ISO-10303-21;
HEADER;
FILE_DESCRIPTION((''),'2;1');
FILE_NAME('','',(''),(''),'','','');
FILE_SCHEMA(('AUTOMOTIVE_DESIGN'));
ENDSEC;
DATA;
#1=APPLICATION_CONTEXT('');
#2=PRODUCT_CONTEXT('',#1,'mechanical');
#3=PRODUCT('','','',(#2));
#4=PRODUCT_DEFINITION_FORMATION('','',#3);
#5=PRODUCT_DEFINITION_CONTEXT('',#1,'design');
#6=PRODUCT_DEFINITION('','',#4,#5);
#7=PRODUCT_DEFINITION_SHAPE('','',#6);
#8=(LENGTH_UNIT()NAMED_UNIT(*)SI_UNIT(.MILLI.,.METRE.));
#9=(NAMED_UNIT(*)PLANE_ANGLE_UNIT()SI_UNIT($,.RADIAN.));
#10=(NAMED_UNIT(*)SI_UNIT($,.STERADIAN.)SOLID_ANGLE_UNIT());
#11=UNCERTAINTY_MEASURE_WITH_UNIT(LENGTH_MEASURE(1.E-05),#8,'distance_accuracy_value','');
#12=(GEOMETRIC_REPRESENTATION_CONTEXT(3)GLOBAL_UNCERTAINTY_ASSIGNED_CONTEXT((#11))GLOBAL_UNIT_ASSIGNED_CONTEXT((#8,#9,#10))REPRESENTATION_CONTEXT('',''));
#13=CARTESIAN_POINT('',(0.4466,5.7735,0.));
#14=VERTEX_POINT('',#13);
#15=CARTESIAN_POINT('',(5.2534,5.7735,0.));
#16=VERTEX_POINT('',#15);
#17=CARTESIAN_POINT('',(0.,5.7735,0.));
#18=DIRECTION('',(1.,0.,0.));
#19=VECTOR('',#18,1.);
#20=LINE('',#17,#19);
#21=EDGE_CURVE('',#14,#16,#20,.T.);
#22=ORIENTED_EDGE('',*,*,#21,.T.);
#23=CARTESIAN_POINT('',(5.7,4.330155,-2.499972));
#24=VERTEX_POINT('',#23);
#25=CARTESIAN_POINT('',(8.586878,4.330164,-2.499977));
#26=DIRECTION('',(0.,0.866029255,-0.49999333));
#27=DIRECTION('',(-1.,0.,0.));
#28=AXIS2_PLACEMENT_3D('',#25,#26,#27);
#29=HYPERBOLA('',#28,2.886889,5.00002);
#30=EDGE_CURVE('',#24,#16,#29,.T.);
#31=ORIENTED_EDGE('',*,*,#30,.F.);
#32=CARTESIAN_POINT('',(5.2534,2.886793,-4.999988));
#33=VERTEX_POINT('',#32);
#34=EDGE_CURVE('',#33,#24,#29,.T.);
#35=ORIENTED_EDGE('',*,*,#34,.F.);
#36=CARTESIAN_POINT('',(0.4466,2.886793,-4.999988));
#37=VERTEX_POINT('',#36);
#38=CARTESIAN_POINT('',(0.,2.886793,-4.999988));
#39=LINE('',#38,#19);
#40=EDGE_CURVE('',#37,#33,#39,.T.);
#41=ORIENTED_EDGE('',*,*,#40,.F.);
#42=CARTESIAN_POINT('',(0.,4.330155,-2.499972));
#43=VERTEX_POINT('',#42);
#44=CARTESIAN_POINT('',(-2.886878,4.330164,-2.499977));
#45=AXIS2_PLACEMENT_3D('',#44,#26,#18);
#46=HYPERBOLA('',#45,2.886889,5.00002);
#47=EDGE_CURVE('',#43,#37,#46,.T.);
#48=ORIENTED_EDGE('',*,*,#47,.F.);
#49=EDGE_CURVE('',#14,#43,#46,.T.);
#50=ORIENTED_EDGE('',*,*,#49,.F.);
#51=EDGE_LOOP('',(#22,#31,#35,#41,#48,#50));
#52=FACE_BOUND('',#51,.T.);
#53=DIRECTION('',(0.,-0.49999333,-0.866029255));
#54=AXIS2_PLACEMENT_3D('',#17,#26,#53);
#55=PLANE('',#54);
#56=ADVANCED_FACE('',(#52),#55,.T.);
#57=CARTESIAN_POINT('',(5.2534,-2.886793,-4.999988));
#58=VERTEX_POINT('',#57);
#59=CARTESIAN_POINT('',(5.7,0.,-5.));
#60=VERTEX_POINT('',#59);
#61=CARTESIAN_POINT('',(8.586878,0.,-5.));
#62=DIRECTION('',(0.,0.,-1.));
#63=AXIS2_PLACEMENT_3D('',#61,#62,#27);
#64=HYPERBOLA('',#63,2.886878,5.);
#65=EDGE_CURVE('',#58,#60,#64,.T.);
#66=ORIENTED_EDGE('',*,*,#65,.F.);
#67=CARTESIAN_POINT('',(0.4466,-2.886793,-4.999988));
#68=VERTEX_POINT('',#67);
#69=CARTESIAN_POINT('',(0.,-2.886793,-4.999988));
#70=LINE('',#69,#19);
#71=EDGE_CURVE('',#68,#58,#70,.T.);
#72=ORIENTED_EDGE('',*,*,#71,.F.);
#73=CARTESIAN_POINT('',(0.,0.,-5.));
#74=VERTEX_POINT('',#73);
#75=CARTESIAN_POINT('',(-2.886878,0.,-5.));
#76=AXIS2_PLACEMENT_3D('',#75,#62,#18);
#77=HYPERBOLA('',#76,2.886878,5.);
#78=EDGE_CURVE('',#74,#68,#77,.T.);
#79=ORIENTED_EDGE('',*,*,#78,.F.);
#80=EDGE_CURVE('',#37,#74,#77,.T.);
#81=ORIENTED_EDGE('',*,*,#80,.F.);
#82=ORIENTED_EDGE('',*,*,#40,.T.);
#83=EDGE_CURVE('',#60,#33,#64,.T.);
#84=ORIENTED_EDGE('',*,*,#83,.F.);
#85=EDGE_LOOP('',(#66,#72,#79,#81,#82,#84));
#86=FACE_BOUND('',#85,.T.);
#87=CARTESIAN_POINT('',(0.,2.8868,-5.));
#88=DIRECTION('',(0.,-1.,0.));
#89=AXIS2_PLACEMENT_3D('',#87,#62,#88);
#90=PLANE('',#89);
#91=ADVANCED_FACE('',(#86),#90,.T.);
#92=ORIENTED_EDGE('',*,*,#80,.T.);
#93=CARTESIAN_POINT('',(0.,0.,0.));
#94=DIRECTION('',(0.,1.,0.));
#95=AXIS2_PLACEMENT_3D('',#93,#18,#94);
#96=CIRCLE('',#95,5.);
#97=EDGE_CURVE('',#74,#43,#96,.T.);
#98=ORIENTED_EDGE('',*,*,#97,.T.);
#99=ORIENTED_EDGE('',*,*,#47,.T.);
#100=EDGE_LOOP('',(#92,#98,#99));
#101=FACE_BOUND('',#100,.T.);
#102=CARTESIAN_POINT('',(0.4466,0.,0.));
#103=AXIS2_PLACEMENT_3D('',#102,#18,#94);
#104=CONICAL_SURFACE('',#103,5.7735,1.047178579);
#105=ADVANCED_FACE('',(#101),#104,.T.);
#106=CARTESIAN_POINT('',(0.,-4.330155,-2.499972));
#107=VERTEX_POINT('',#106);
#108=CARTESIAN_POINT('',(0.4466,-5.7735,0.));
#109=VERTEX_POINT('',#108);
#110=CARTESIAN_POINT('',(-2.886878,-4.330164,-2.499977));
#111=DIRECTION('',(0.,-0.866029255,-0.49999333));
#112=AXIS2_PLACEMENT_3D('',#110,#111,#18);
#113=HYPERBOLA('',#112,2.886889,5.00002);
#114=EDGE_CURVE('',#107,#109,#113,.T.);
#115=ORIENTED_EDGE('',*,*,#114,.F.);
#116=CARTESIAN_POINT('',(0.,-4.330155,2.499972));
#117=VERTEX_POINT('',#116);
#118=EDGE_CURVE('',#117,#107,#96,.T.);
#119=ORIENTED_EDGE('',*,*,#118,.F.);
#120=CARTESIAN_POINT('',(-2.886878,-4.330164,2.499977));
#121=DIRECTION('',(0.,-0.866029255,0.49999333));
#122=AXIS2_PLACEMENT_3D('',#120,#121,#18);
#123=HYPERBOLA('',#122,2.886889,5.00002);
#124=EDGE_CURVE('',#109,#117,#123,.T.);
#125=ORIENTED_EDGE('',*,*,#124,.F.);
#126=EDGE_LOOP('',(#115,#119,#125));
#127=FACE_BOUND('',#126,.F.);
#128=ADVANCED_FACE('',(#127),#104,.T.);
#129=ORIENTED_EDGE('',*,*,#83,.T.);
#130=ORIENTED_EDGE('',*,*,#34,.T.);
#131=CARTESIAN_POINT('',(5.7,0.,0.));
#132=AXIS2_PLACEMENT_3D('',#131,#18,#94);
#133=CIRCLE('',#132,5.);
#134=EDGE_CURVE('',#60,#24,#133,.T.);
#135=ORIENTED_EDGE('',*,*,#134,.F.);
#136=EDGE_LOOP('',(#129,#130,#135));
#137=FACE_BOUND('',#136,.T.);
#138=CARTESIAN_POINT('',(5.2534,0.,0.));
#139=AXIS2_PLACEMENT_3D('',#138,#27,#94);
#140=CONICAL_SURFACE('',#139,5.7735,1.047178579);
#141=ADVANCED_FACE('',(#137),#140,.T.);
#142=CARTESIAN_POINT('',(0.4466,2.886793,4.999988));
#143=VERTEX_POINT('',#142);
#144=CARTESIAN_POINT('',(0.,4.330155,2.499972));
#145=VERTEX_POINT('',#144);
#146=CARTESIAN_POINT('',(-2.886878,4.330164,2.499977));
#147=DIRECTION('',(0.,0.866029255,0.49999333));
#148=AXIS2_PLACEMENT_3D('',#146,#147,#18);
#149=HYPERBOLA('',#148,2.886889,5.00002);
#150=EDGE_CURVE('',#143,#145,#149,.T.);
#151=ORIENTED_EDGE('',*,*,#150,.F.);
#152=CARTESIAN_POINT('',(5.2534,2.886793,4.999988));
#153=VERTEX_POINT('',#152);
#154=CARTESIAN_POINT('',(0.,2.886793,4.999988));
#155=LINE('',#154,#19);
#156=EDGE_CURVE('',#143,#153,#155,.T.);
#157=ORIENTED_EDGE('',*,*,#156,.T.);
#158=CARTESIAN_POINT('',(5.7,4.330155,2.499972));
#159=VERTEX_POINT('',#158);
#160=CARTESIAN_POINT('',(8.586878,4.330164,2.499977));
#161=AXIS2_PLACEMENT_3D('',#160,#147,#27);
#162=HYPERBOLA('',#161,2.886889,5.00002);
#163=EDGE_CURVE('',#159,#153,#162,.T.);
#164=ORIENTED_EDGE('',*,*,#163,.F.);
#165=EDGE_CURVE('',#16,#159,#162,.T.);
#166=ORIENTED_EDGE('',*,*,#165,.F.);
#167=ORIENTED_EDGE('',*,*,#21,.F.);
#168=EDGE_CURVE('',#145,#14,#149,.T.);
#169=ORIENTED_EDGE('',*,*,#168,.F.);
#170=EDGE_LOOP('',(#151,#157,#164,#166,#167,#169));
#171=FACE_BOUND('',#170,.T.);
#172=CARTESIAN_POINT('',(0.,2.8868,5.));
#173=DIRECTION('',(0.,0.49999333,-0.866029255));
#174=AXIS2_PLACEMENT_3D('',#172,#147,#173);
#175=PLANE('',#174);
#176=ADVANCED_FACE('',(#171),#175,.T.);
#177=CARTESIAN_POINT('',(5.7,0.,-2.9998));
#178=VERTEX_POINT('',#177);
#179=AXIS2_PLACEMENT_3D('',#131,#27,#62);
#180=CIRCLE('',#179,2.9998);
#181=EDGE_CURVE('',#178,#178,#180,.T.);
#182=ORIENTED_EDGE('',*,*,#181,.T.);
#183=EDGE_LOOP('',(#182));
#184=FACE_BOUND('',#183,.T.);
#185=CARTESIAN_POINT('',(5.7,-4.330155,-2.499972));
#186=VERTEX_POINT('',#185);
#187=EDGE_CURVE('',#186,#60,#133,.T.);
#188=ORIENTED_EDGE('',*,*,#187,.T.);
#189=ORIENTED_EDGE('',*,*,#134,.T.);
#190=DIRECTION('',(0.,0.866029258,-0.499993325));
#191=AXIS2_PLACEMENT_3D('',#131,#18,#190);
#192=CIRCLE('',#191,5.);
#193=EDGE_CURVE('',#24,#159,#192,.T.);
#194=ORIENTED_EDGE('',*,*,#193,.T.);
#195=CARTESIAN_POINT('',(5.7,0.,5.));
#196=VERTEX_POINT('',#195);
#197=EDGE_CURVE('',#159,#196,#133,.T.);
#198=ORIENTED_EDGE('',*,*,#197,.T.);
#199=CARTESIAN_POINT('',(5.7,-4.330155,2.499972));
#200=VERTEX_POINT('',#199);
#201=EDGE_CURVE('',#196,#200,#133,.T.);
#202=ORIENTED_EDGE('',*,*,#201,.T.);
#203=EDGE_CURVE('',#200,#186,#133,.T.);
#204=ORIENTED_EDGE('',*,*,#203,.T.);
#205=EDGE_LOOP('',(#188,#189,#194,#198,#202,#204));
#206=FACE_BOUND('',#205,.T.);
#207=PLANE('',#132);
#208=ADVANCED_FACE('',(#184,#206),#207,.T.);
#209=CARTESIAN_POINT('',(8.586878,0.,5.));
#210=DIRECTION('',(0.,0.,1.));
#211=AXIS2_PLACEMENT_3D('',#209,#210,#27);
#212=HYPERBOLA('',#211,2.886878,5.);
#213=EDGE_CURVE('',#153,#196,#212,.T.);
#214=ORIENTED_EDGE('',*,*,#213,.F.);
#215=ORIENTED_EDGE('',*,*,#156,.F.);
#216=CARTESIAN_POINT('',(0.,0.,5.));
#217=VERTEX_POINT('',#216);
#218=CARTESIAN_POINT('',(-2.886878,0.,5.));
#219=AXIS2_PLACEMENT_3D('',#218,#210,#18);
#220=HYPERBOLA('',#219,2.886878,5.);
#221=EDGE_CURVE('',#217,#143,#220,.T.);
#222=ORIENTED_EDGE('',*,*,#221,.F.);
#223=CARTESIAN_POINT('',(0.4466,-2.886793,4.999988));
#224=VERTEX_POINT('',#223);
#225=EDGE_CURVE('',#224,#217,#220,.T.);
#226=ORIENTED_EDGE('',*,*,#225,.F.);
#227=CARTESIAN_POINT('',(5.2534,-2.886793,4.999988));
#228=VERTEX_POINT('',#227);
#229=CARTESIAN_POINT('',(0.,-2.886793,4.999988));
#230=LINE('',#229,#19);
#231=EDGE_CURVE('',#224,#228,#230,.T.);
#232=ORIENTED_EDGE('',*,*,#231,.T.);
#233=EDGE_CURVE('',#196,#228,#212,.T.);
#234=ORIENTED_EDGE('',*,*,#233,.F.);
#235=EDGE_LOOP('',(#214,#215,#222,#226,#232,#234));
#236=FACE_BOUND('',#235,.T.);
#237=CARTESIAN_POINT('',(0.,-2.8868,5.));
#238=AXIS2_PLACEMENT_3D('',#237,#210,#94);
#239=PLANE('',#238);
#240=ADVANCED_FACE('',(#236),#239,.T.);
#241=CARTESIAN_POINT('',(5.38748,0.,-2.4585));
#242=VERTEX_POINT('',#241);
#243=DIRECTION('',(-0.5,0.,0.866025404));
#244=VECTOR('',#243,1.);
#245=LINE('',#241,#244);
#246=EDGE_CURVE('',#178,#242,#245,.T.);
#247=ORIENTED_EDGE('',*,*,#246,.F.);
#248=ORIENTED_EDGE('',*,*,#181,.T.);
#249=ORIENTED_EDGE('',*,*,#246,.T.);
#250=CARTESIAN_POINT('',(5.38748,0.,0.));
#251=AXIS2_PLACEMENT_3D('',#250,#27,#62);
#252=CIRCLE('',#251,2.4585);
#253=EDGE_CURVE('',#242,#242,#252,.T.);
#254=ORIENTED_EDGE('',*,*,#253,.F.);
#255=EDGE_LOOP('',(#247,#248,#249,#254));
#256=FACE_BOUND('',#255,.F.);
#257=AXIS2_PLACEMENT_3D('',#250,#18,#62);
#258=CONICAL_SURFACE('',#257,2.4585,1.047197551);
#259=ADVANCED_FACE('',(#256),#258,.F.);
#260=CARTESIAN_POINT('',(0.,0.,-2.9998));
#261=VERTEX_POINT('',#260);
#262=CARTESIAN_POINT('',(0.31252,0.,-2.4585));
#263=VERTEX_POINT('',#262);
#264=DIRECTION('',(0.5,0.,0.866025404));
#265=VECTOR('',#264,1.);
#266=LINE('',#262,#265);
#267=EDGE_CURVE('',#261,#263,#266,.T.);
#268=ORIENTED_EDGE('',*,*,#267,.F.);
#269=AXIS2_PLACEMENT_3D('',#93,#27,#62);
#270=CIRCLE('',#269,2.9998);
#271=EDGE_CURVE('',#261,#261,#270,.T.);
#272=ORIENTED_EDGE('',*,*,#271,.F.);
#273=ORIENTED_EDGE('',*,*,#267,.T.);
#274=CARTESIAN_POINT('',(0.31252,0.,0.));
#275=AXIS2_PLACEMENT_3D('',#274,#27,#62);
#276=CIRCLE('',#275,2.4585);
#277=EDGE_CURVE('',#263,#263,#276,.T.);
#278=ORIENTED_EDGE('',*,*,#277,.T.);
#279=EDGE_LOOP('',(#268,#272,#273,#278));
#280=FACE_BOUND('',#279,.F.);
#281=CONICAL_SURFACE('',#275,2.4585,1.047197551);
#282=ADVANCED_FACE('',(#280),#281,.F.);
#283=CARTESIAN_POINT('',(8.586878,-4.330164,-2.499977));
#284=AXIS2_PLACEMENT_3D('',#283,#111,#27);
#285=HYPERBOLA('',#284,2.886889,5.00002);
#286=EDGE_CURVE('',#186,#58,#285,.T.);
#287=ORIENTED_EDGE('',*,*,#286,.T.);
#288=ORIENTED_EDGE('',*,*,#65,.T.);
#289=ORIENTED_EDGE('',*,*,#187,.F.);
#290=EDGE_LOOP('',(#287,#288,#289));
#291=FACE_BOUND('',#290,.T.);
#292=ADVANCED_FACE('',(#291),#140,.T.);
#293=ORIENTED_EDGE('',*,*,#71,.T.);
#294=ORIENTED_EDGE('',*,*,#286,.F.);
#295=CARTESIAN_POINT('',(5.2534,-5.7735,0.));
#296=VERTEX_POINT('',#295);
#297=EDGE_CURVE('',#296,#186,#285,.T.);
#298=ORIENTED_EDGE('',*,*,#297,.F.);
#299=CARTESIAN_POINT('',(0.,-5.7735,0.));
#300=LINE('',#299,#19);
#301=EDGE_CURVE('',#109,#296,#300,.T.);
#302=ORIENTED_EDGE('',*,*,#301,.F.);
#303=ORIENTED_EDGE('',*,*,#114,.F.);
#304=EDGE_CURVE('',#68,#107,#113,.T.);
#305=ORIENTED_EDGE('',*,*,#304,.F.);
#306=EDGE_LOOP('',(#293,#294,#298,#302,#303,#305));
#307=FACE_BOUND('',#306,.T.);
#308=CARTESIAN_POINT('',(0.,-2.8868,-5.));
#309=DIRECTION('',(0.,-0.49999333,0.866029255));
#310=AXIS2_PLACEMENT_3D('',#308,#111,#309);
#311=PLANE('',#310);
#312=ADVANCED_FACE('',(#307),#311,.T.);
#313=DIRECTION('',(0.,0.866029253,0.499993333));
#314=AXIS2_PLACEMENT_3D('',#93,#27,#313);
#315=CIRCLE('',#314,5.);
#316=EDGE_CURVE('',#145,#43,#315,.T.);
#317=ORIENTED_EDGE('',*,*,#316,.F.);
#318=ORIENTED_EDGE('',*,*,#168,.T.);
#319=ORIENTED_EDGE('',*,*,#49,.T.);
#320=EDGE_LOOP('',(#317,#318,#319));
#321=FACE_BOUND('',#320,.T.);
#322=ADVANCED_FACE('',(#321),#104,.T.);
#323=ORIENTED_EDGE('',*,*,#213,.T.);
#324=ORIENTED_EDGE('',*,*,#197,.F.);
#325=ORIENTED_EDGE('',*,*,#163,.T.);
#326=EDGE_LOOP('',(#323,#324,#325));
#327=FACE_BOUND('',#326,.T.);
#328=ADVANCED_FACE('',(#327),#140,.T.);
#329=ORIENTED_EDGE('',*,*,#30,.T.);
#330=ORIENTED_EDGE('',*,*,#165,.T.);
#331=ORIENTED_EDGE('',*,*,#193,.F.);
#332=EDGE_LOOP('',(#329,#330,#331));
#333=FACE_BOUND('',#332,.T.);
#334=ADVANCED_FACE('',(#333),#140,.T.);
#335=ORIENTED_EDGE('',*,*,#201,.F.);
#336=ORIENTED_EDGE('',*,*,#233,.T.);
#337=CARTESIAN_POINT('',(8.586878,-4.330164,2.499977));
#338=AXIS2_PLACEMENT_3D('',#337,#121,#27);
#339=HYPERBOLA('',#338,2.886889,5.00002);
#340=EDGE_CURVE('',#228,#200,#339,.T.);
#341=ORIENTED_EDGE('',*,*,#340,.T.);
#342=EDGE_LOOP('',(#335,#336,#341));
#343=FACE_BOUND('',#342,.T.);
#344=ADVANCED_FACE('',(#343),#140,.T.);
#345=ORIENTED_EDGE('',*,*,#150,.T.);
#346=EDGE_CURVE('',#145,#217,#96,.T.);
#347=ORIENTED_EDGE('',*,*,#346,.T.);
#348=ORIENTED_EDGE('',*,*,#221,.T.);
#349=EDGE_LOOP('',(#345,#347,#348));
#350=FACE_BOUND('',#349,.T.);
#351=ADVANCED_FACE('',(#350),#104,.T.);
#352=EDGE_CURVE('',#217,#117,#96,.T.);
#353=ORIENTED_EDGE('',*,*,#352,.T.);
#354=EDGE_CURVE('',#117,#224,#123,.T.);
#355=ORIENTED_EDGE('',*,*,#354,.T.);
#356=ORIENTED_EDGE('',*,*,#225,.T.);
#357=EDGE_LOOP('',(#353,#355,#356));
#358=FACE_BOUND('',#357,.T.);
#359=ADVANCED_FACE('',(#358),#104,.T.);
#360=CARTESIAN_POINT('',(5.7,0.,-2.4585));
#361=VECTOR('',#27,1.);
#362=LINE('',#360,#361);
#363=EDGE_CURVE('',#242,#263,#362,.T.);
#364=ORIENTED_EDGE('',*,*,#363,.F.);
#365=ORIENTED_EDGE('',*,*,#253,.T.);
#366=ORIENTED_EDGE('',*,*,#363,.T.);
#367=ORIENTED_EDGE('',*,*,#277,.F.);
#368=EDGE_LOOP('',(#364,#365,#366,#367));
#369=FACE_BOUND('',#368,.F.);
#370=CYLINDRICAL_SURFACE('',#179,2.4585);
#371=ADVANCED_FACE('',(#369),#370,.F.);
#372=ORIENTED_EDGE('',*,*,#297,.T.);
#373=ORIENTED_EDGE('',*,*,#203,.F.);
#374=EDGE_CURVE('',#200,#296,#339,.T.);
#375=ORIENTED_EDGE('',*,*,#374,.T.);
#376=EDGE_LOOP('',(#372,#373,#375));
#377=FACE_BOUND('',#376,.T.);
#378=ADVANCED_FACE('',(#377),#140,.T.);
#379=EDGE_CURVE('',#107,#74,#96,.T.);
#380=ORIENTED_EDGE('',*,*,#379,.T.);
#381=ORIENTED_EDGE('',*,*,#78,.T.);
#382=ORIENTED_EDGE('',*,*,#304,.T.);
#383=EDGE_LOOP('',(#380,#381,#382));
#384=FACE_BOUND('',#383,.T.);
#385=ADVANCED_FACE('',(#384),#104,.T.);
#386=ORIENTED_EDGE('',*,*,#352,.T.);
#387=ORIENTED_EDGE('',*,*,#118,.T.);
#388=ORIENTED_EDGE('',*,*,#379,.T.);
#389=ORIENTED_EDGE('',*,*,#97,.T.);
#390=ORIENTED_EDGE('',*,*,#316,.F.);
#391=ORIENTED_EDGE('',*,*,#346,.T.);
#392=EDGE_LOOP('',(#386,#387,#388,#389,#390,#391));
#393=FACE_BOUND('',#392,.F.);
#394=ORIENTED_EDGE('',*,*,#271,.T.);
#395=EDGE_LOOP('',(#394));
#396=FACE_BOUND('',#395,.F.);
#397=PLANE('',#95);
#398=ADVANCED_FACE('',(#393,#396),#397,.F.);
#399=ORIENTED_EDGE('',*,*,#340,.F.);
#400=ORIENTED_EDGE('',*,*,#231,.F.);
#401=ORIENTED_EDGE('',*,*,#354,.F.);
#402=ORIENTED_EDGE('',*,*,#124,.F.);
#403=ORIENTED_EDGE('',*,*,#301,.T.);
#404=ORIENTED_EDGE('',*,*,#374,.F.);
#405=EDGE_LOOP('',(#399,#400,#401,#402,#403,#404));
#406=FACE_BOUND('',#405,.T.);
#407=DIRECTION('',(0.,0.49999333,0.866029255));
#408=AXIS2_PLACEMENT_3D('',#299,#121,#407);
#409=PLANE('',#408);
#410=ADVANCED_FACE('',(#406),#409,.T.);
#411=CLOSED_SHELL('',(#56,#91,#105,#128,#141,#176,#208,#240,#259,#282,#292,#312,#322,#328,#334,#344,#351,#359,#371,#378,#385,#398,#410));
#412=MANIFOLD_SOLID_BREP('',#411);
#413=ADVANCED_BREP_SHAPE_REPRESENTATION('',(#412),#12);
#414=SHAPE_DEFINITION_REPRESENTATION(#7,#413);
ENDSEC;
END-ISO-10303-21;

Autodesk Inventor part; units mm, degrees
ref_plane "YZ Plane" through (0, 0, 0) normal (1, 0, 0) x (0, 1, 0)
ref_plane "XZ Plane" through (0, 0, 0) normal (0, 1, 0) x (-1, 0, 0)
sketch "Sketch1" plane through (0, 0, 0) normal (1, 0, 0) x (0, 1, 0)
  line L0 (-5.7735, 0) -> (-2.8868, 5)
  line L1 (-2.8868, 5) -> (2.8868, 5)
  line L2 (2.8868, 5) -> (5.7735, 0)
  line L3 (5.7735, 0) -> (2.8868, -5)
  line L4 (2.8868, -5) -> (-2.8868, -5)
  line L5 (-2.8868, -5) -> (-5.7735, 0)
  point P0 (0, 0)
  point P1 (0, 0)
  dimension "d0" = 11.547
extrude "Body" add sketch "Sketch1" along normal blind 5.7
sketch "Sketch2" plane through (0, 0, 0) normal (0, 0, 1) x (1, 0, 0)
  line L0 (0, 2.8868) -> (0, 5.7735) projected
  line L1 (0, 5.7735) -> (5.7, 5.7735) projected
  line L2 (5.7, 2.8868) -> (5.7, 5.7735) projected
  line L3 (-1.14, 0) -> (6.84, 0) projected
  line L4 (0.4466, 5.7735) -> (0, 5)
  line L5 (5.2534, 5.7735) -> (5.7, 5)
  dimension "d3" = 30
  dimension "d4" = 30
  dimension "d5" = 10
  dimension "d6" = 10
revolve "Chamfer1" cut sketch "Sketch2" angle 360 about axis through (-10, 0, 0) along (1, 0, 0)
sketch "Sketch3" plane through (5.7, 0, 0) normal (1, 0, 0) x (0, 0, -1)
  arc A0 (-2.5, -4.3301) -> (2.5, -4.3301) centre (0, 0) ccw projected
hole "Thread" at (5.7, 0, 0) direction (-1, 0, 0) diameter 4.917 end through all thread size "M6x1" designation "M6" class "6H" standard "GB Metric profile"
chamfer "Chamfer2" distance 0.5413 angle 30 1 edges at (5.7, 0, 2.4585) measured on face at (5.7, -4.1286, -0.0988)
chamfer "Chamfer3" distance 0.5413 angle 30 1 edges at (0, 0, 2.4585) measured on face at (0, -4.1286, -0.0988)
ref_plane "Work Plane1" through (-10.6041, 0, 0) normal (0, -0.8660254, -0.5) x (1, 0, 0)
equation "\"d0\" = 1.1547 * SW"
equation "\"d1\" = KOH"
equation "\"d3\" = ANG1"
equation "\"d4\" = ANG2"
equation "\"d5\" = SW0"
equation "\"d6\" = SW01"
equation "\"d8\" = -0.5 * GD1 + 0.5 * NND"
equation "\"d40\" = -0.5 * GD1 + 0.5 * NND"
equation "\"d10\" = -0.5 * GD1 + 0.5 * NND"
equation "\"d41\" = -0.5 * GD1 + 0.5 * NND"
equation "\"ANG1\" = 30deg"
equation "\"ANG2\" = 30deg"
equation "\"NND\" = 6"
equation "\"KOH\" = 5.7"
equation "\"SW0\" = SW"
equation "\"SW01\" = SW"
equation "\"GUL\" = 0.541266 * PTC"
equation "\"THREADDIA\" = 6"
equation "\"TOA\" = 30deg"
equation "\"PTC\" = 1"
equation "\"E0\" = 1.155 * SW"
equation "\"GAL\" = 0.541266 * PTC"
equation "\"SW\" = 10"
equation "\"GD1\" = 4.917468"
properties part number "Nut GB/T 6175 M6" material "Steel, Mild"
